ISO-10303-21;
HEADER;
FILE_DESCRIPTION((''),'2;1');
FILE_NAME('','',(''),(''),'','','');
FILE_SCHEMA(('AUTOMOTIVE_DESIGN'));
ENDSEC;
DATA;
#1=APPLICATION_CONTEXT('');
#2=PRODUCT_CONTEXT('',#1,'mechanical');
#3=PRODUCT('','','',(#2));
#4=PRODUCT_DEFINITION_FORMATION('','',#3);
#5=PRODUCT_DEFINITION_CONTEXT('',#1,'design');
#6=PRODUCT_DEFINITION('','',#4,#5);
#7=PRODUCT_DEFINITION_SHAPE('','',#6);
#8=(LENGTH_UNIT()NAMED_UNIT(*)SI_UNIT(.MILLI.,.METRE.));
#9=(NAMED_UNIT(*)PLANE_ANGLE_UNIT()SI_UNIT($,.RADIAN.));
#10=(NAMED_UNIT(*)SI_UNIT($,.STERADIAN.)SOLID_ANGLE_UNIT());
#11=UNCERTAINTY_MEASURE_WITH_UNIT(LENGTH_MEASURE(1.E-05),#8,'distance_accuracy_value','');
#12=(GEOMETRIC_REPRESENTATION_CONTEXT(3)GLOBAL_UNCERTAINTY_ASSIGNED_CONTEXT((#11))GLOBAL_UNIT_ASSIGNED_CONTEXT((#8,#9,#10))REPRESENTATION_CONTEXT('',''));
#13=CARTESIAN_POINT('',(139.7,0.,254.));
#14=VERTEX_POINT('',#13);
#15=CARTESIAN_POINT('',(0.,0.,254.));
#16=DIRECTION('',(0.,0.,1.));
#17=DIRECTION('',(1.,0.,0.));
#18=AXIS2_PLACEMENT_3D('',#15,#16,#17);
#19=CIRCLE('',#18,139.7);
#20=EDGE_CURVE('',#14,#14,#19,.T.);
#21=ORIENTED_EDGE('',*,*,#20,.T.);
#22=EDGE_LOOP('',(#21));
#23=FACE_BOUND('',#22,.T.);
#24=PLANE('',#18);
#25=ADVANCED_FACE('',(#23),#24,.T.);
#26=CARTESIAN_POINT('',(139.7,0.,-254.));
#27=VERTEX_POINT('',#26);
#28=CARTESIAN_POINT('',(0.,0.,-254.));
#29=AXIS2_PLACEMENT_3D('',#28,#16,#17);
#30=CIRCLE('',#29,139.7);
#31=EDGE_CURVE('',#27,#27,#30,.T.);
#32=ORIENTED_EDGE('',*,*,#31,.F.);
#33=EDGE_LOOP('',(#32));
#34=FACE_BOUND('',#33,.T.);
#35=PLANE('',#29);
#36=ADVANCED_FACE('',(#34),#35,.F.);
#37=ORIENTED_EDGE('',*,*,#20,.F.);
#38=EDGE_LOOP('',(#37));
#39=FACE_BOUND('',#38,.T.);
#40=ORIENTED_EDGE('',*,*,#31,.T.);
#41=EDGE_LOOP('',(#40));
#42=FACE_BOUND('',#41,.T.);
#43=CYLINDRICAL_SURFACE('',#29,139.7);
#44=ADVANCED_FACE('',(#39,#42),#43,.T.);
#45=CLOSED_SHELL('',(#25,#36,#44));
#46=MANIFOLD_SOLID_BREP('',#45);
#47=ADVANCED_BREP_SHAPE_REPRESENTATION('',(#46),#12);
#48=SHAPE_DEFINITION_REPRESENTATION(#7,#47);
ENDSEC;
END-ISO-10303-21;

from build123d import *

# Parameters (mm, degrees)
FUSELAGE_START     = -254
FUSELAGE_OUTLINE_R = 139.7
FUSELAGE_DEPTH     = 508


# Read off the part's stored shape, not the designer's step: FuseLage
with BuildPart() as part:
    # FuseLage outline → FuseLage (new body)
    with BuildSketch(Plane.XY.offset(FUSELAGE_START)):
        Circle(FUSELAGE_OUTLINE_R)
    extrude(amount=FUSELAGE_DEPTH)


solid = part.part
